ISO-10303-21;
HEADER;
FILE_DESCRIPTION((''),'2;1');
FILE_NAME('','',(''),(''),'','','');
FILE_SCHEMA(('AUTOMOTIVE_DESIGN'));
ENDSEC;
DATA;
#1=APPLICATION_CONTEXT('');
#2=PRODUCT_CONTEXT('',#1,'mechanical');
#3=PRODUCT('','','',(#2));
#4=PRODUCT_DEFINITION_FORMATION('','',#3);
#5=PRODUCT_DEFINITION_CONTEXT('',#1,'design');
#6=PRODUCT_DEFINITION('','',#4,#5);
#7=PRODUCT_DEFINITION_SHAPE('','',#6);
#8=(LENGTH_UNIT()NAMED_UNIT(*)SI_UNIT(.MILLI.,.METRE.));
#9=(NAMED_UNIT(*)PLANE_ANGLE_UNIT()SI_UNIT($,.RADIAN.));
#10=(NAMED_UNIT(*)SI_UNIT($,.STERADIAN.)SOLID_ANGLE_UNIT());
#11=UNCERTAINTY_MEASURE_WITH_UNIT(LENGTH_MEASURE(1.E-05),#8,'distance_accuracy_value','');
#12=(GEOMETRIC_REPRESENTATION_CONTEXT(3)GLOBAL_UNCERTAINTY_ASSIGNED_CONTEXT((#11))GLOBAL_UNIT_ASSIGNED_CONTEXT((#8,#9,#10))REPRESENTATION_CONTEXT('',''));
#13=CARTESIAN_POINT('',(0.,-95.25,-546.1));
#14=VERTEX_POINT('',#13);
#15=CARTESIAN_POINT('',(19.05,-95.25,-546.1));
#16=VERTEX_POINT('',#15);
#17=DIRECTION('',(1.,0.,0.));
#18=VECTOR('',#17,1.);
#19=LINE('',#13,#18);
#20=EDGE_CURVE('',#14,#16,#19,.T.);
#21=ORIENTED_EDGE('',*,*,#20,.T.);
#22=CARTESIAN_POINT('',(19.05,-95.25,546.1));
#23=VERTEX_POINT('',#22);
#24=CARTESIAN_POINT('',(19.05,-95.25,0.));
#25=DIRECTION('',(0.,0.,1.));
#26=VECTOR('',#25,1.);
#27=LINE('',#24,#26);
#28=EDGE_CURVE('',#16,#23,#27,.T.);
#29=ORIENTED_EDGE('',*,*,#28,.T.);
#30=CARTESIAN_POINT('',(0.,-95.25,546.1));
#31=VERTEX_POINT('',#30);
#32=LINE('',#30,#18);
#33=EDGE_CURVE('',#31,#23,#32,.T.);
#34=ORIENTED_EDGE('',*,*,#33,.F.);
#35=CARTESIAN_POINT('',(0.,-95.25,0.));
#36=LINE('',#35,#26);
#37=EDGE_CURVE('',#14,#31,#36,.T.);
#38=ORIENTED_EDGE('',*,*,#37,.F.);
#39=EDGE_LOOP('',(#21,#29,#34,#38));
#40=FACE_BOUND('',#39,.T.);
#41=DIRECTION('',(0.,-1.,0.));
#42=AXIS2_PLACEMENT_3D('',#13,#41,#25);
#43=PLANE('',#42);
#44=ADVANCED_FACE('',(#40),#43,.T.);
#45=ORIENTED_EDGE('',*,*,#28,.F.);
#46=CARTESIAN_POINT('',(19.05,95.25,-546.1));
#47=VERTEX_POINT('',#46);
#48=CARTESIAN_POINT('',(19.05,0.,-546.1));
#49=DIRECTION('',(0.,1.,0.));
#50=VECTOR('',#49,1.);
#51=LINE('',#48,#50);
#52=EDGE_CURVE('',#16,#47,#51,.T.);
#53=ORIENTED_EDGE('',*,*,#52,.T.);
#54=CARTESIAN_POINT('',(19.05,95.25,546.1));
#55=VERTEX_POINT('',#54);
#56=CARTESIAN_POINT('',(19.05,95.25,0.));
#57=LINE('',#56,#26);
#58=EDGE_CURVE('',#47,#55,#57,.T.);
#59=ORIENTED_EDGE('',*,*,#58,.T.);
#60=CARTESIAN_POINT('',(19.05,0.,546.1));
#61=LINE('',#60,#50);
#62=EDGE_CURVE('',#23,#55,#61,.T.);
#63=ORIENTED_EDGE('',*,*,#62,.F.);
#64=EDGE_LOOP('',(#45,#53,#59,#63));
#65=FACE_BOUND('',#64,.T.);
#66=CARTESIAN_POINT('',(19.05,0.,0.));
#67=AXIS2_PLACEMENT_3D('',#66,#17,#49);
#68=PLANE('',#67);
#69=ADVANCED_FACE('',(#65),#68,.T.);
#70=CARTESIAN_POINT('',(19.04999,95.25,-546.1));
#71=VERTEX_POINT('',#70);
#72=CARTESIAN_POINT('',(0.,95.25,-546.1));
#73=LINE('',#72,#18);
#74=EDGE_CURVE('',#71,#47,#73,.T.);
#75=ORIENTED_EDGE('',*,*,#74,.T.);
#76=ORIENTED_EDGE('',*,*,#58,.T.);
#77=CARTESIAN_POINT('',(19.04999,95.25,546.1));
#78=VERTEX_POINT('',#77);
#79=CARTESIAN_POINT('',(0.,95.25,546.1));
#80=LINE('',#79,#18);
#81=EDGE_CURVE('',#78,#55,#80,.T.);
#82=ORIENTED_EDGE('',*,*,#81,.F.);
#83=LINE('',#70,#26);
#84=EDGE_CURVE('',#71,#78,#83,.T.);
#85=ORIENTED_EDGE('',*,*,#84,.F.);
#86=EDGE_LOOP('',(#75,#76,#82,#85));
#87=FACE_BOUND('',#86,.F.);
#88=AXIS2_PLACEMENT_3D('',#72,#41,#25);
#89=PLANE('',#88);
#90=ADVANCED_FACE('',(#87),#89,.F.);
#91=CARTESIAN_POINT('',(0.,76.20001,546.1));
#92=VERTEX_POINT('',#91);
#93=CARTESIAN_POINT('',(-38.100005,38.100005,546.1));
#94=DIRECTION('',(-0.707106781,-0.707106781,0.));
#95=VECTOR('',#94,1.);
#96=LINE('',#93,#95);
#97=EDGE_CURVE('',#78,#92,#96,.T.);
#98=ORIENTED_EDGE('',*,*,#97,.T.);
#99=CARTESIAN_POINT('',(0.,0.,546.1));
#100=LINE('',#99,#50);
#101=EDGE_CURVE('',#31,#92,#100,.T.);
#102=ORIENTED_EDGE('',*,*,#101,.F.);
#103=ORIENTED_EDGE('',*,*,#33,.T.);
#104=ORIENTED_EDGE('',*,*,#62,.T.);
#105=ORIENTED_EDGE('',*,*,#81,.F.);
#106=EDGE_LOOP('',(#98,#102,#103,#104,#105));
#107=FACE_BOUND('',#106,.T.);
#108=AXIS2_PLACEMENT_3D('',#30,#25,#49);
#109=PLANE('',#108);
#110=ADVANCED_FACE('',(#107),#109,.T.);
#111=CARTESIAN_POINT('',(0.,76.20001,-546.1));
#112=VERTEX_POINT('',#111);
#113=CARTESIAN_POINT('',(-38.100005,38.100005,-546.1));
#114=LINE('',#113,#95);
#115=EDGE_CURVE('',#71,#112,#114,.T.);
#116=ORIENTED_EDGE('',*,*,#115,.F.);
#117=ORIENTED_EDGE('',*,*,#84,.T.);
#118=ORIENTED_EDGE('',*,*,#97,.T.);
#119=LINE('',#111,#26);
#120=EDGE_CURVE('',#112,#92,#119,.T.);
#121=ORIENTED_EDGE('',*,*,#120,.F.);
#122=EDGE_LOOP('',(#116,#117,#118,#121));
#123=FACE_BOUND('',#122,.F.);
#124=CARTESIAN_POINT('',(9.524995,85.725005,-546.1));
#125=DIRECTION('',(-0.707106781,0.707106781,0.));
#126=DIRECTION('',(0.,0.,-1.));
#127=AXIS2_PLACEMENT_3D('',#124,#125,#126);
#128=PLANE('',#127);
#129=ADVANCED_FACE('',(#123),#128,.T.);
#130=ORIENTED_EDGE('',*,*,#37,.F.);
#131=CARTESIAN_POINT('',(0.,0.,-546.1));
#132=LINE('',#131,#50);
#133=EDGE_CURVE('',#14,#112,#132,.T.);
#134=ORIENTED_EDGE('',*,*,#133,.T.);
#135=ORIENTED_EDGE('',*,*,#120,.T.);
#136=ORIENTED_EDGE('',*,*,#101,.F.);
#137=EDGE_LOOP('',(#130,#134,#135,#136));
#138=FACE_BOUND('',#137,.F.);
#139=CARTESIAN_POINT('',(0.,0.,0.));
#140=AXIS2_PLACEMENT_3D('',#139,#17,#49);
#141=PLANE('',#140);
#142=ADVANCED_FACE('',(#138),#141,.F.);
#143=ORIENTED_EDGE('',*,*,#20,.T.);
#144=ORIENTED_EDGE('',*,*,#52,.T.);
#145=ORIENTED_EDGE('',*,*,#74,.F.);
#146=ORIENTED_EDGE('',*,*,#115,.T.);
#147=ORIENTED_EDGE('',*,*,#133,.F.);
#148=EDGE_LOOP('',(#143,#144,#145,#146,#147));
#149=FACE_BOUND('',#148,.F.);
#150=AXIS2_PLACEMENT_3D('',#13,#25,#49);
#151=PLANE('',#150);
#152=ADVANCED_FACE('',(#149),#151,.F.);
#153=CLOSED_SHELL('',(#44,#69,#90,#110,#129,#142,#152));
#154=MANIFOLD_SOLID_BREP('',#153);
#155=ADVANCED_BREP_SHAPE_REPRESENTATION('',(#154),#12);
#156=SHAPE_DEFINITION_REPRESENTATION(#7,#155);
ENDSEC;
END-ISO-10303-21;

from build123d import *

# Parameters (mm, degrees)
F0_W     = 190.5
F0_H     = 1092.2
F1_DEPTH = 19.05
F2_SIZE  = 19.04999


# Not quite as in the source:
# - a fillet or chamfer is up to 0.001 mm smaller than in the source, because OpenCascade refuses the exact size


with BuildPart() as f1:
    # F0 (on Right) → F1 (new body)
    with BuildSketch(Plane.YZ):
        Rectangle(F0_W, F0_H)
    extrude(amount=F1_DEPTH)

    # F2 (size 19.05 in the source; OpenCascade refuses exactly that, so slightly less here)
    f2_edges = [f1.edges().sort_by_distance(p)[0] for p in [
        (0, 95.25, 0),
    ]]
    chamfer(f2_edges, length=F2_SIZE)


solid = f1.part
